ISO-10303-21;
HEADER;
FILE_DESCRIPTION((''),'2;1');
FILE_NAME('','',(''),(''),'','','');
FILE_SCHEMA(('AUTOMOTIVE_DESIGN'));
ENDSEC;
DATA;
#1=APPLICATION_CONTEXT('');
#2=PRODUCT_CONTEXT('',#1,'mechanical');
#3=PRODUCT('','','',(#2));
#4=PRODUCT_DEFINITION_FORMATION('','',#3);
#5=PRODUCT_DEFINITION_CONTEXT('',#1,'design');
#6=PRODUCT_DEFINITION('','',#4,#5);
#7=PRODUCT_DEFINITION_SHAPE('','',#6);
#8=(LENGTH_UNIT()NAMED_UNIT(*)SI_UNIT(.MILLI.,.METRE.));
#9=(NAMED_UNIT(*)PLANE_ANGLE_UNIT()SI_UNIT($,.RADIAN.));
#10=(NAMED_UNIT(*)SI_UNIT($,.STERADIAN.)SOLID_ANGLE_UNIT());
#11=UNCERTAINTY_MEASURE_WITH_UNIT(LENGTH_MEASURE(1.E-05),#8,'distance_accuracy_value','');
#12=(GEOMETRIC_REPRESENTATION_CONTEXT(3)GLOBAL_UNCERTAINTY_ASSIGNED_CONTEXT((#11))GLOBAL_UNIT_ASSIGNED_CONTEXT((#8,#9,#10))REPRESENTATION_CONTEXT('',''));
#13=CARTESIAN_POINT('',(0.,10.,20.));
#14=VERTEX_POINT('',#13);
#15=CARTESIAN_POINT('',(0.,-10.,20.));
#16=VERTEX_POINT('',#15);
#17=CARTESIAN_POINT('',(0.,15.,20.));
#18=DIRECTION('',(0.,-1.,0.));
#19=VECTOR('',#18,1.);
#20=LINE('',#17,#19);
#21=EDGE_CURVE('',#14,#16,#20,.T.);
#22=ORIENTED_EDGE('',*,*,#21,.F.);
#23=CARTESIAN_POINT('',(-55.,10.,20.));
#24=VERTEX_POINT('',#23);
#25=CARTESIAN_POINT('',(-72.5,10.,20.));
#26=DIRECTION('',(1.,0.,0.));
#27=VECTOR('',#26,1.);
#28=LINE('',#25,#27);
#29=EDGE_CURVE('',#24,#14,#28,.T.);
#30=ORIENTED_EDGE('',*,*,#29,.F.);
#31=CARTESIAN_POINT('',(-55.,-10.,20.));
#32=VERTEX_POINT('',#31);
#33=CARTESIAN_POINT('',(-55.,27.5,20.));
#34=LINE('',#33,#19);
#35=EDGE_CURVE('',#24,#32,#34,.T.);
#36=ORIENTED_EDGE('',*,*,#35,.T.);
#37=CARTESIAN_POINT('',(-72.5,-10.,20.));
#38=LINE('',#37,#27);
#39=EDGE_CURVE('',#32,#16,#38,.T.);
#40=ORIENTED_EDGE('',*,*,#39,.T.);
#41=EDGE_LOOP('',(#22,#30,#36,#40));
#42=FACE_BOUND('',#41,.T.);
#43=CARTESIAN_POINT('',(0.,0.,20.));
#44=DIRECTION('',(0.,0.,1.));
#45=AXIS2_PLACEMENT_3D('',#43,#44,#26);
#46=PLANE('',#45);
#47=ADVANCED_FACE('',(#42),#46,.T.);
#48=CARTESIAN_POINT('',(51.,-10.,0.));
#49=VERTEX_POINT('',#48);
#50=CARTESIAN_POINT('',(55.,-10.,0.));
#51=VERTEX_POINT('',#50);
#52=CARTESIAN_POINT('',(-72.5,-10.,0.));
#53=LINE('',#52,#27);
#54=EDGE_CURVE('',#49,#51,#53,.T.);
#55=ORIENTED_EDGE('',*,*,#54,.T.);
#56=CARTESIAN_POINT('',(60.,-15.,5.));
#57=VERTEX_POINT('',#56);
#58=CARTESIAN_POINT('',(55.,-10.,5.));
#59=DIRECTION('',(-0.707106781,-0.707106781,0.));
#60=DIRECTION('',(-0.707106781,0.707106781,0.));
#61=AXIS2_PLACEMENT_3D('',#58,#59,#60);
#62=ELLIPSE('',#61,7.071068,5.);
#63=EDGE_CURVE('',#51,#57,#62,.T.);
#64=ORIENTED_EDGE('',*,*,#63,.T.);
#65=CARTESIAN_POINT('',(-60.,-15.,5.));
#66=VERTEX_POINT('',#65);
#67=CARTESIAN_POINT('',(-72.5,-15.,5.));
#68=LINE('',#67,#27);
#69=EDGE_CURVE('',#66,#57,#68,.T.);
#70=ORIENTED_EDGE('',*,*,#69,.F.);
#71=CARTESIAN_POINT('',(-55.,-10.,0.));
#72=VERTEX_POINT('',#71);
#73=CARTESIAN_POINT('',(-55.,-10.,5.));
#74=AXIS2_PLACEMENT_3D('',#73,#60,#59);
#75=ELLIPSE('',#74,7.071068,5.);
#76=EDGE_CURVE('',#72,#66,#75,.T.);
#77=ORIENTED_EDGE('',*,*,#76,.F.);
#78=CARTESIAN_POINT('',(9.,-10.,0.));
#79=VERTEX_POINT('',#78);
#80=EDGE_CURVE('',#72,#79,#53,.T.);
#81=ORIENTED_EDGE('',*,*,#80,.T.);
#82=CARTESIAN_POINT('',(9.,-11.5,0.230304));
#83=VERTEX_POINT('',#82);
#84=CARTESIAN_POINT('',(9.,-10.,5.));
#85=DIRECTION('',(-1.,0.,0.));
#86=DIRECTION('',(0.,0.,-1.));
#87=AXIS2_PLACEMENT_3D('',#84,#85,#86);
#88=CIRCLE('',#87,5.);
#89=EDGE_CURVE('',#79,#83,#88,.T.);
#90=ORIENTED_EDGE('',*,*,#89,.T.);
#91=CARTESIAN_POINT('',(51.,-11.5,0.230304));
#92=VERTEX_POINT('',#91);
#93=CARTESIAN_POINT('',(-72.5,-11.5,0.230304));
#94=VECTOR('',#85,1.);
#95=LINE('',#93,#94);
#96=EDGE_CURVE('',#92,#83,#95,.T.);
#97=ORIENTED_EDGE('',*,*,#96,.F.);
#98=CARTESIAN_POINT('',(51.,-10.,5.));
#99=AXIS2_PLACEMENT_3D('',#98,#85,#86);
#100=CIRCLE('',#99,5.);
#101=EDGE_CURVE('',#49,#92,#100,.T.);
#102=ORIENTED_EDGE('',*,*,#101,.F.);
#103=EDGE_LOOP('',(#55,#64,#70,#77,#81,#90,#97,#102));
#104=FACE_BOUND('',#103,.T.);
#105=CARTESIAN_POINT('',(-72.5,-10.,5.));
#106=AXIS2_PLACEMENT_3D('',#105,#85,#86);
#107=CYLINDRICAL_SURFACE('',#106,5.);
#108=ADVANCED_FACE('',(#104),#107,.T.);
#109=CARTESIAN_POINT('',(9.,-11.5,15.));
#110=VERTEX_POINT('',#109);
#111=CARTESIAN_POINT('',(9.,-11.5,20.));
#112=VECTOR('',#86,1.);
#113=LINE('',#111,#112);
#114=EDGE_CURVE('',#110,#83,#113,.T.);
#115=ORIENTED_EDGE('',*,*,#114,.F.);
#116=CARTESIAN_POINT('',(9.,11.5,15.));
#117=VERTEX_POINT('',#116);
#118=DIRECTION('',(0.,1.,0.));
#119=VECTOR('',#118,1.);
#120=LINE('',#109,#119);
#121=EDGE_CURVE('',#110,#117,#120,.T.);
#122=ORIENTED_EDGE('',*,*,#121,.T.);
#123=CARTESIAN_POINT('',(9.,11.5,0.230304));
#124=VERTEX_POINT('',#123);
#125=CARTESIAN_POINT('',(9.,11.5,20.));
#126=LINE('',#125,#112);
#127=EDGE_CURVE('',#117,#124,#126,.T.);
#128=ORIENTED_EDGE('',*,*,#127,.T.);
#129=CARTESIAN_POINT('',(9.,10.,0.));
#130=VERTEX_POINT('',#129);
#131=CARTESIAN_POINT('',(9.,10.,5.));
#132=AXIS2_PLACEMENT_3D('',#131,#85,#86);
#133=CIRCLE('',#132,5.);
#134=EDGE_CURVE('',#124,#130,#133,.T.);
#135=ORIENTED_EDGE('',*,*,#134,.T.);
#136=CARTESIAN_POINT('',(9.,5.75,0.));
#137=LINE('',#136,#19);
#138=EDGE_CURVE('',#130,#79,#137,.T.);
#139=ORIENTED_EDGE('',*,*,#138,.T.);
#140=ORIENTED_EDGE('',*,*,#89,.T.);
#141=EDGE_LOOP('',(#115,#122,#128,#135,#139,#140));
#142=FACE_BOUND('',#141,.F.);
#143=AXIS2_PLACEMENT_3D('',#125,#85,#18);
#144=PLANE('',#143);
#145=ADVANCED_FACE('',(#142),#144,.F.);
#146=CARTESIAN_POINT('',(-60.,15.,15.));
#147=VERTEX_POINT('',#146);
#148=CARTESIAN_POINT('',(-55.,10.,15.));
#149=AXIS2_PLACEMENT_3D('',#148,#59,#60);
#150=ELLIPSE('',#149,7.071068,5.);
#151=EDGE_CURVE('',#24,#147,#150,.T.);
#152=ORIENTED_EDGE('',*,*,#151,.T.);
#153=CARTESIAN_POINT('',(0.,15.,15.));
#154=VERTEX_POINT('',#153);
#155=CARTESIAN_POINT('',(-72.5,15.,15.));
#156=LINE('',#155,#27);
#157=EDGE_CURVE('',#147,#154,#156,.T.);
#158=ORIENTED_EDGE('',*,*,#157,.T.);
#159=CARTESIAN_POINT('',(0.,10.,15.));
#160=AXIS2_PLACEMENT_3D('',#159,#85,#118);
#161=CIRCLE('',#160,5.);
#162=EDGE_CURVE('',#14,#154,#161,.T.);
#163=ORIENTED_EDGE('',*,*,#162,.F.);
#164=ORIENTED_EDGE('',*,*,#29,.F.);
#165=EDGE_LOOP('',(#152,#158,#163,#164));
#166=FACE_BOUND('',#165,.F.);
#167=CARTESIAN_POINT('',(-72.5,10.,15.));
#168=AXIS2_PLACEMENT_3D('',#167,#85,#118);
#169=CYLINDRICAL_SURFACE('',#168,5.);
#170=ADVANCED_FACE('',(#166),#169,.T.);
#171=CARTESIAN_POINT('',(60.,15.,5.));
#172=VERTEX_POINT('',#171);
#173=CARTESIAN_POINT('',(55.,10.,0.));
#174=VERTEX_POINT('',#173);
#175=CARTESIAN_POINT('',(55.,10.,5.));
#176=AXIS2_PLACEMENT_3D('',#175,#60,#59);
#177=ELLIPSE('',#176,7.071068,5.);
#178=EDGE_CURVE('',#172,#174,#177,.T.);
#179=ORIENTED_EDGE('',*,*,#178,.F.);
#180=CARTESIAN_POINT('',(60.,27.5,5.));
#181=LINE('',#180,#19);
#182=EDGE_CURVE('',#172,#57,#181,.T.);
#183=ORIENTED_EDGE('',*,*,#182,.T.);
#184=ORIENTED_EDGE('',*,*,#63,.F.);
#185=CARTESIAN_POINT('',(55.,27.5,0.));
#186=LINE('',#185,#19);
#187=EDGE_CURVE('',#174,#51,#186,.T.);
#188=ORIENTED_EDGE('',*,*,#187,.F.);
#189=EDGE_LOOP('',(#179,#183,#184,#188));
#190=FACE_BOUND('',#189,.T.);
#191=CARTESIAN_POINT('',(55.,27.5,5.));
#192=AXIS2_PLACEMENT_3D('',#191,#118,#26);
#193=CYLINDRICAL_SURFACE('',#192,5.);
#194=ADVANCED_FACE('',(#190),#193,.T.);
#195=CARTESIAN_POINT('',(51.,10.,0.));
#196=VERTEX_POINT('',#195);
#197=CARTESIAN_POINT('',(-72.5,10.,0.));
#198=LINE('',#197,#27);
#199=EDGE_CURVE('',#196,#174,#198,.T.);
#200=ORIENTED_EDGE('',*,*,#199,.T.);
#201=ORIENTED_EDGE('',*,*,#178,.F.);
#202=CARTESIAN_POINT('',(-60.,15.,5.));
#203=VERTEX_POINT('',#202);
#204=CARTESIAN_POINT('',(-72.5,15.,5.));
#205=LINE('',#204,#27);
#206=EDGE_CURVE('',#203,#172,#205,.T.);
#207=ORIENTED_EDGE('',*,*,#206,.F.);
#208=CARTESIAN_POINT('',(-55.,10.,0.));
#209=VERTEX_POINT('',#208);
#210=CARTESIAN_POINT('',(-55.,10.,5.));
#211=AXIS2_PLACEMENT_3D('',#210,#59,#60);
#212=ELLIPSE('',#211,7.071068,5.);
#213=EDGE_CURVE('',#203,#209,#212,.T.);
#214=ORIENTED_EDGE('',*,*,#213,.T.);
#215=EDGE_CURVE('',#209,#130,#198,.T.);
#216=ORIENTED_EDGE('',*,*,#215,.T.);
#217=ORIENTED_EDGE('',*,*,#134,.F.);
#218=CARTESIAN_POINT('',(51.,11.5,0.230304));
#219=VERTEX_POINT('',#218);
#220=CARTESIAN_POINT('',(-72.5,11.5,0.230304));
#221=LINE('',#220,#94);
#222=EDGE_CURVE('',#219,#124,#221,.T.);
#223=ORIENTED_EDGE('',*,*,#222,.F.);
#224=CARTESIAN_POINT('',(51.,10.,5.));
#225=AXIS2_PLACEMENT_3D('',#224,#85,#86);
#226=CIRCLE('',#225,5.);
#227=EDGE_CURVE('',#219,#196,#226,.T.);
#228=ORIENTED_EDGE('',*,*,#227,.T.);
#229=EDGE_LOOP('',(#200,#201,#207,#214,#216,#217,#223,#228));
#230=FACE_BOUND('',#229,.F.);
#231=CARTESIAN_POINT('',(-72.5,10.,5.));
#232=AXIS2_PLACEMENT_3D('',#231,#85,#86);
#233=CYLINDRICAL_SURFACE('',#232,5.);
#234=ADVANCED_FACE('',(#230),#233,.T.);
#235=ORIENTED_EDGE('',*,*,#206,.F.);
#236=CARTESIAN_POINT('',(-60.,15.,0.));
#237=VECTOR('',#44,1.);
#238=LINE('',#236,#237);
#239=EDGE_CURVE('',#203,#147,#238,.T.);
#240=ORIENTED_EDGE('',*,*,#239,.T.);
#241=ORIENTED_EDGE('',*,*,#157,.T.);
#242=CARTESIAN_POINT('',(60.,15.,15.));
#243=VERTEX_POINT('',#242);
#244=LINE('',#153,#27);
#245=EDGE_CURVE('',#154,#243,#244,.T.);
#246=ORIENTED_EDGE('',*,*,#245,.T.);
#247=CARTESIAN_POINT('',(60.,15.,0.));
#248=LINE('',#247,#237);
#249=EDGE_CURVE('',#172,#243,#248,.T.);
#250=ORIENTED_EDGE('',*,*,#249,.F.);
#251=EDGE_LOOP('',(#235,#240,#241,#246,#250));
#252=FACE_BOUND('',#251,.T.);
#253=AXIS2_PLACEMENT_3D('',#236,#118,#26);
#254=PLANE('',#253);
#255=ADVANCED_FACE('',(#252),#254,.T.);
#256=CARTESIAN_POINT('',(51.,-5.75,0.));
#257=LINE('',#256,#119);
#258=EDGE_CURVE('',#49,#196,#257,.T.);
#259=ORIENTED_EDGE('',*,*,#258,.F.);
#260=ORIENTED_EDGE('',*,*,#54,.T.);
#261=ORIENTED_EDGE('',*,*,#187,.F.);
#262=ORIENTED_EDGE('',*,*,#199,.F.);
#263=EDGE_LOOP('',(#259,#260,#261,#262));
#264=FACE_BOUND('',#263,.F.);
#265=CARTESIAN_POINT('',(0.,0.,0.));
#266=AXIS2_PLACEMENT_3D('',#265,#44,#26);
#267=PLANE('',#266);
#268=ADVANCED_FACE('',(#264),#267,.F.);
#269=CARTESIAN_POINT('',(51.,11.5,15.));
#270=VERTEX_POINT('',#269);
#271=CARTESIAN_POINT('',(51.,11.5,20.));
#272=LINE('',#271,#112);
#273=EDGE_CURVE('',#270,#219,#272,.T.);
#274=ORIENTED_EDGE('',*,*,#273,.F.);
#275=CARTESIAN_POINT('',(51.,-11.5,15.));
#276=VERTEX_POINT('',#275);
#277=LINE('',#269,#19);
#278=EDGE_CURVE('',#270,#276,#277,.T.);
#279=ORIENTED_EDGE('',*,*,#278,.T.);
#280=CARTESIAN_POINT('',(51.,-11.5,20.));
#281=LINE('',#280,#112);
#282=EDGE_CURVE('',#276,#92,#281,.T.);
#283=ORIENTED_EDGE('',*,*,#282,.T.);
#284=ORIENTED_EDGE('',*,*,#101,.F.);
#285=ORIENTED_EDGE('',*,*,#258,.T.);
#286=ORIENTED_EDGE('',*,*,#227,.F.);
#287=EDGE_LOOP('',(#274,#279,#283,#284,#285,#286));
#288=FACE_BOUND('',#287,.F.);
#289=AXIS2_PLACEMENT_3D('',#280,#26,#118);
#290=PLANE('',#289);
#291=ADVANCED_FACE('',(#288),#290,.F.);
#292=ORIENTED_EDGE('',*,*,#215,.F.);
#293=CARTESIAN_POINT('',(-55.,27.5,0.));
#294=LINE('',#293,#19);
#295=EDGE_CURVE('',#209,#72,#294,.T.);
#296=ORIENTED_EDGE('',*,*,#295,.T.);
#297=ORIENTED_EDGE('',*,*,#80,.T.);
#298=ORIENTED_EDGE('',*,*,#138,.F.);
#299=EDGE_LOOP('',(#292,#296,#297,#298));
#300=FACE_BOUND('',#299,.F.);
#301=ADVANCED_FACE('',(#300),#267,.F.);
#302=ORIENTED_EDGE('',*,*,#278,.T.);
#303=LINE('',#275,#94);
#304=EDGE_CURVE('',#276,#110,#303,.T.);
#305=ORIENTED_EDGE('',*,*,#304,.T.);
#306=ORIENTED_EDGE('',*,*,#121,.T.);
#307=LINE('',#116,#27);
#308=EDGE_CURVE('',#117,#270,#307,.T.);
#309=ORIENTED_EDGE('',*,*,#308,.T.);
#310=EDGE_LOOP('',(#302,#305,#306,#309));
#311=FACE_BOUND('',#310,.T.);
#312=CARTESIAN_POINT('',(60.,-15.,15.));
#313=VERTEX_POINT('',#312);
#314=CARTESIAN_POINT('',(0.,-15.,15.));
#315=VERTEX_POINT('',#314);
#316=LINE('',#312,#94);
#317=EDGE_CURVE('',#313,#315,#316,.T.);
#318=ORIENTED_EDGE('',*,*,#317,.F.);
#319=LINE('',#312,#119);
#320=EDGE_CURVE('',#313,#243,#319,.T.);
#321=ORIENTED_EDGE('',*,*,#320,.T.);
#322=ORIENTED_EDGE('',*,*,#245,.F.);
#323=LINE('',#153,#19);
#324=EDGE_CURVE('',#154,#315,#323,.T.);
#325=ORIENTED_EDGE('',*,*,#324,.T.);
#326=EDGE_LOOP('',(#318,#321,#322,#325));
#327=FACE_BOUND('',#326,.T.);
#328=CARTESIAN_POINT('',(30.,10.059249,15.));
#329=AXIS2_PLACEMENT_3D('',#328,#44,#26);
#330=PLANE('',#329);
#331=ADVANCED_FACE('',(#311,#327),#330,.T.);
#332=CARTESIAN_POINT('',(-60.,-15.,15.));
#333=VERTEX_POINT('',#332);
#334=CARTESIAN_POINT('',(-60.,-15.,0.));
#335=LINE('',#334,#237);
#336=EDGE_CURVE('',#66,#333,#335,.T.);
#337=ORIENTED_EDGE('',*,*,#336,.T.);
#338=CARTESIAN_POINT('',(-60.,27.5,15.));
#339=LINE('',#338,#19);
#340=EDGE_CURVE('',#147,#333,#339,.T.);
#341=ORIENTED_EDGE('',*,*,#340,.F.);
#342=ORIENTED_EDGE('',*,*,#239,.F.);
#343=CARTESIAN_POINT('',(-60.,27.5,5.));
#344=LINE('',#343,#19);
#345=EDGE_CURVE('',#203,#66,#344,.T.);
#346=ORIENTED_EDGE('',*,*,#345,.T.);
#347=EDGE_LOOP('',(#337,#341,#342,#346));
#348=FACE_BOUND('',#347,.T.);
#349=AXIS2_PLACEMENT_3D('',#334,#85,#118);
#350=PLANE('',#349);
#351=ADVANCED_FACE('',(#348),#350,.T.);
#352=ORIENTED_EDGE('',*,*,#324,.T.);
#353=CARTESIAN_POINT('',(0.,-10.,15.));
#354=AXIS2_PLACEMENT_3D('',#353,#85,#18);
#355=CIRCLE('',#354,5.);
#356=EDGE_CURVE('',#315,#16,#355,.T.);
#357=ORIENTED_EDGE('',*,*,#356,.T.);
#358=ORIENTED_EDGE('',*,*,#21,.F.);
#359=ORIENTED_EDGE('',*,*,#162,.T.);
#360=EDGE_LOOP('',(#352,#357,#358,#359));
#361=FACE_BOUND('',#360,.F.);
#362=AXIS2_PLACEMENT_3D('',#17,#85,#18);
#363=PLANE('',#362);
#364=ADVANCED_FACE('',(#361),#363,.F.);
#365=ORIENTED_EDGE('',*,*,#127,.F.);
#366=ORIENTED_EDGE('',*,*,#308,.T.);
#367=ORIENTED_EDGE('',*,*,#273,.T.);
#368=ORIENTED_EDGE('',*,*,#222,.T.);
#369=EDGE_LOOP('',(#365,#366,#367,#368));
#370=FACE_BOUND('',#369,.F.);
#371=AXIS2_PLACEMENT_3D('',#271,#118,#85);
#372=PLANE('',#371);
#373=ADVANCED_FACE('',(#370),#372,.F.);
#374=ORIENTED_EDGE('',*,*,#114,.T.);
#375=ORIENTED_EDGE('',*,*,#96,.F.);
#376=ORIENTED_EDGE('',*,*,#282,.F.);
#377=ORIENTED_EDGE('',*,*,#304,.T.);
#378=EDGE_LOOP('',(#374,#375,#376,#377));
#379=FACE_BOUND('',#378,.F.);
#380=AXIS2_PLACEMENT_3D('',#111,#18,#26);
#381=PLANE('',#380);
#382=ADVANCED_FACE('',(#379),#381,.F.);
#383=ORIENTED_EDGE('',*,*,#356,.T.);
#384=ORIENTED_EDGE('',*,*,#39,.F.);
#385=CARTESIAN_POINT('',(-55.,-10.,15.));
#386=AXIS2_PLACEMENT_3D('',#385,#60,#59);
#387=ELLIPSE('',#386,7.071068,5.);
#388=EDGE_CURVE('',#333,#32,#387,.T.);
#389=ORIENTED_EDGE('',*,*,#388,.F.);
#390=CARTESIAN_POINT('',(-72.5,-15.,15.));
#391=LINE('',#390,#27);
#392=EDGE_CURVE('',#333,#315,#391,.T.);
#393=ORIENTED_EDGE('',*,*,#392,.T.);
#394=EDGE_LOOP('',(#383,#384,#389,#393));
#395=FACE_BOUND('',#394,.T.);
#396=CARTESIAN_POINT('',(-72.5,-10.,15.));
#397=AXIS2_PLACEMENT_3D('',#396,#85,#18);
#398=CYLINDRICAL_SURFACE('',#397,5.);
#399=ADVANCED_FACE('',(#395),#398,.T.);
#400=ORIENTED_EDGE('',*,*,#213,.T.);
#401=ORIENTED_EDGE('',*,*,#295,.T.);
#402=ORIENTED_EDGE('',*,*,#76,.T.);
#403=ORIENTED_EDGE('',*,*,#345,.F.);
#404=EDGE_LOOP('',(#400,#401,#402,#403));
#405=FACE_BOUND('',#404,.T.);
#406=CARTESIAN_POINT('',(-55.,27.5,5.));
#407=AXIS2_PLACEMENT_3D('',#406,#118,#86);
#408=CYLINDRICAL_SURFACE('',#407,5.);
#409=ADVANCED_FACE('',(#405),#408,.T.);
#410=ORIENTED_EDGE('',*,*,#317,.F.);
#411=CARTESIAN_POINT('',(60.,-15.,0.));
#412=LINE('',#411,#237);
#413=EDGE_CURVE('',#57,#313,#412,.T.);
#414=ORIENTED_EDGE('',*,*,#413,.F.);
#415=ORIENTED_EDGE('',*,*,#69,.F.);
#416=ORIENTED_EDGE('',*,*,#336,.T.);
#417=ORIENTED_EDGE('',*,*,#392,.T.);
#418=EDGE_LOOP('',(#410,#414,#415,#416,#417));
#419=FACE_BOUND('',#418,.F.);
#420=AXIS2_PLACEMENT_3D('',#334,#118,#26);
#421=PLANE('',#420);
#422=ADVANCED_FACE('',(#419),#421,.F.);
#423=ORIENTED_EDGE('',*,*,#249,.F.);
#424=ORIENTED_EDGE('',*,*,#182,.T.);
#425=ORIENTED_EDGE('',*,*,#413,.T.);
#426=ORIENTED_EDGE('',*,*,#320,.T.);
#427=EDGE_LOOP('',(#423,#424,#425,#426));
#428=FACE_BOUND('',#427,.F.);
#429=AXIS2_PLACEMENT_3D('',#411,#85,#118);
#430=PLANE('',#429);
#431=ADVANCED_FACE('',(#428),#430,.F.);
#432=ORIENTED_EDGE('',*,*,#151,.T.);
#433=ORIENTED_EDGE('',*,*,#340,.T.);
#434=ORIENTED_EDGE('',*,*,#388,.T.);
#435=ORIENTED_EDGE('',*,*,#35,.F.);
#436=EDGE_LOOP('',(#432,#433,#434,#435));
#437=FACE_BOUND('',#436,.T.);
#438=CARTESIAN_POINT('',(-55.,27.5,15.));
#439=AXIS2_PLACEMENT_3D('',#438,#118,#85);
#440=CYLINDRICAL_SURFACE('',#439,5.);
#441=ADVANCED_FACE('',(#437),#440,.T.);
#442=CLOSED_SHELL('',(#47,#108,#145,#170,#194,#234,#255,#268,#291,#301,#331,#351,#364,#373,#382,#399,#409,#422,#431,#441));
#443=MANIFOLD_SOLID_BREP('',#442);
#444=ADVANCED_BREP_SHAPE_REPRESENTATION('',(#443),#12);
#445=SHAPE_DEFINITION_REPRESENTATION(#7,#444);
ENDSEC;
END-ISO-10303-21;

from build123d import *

# Parameters (mm, degrees)
F0_W        = 120
F0_H        = 30
F1_DEPTH    = 20
F3_DEPTH    = 25
F4_DEPTH    = 5
F5_T1_DEPTH = 85
F5_T3_DEPTH = 145
F5_T5_DEPTH = 55


# Not quite as in the source:
# - a fillet or chamfer that OpenCascade refuses, or shapes differently, is made with other operations: its cross-section is extruded or revolved along the edge and cut away or added


with BuildPart() as f1:
    # F0 (on Top) → F1 (new body)
    with BuildSketch(Plane.XY):
        Rectangle(F0_W, F0_H)
    extrude(amount=F1_DEPTH)

    # F2 (on face) → F3 (cut)
    with BuildSketch(Plane.XY.offset(20)):
        Polygon((9, 11.5), (9, 0), (30, 0), (51, 0), (51, 11.5), align=None)
        Polygon((30, 0), (9, 0), (9, -11.5), (51, -11.5), (51, 0), align=None)
    extrude(amount=-F3_DEPTH, mode=Mode.SUBTRACT)

    # F2 (on face) → F4 (cut)
    with BuildSketch(Plane.XY.offset(20)):
        Polygon((0, 15), (0, 0), (9, 0), (9, 11.5), (51, 11.5), (51, 0), (60, 0), (60, 15), align=None)
        Polygon((9, 0), (0, 0), (0, -15), (60, -15), (60, 0), (51, 0), (51, -11.5), (9, -11.5), align=None)
    extrude(amount=-F4_DEPTH, mode=Mode.SUBTRACT)

    # F5: fillet of radius 5 on 7 edges, made by hand

    # F5_s2 → F5_t1 (cut)
    with BuildSketch(Plane.YZ.offset(-72.5)):
        with BuildLine():
            ThreePointArc((-15, 15), (-13.5355339059, 18.5355339059), (-10, 20))
            Line((-10, 20), (-15, 20))
            Line((-15, 20), (-15, 15))
        make_face()
        with BuildLine():
            ThreePointArc((15, 15), (13.5355339059, 18.5355339059), (10, 20))
            Line((10, 20), (15, 20))
            Line((15, 20), (15, 15))
        make_face()
    extrude(amount=F5_T1_DEPTH, mode=Mode.SUBTRACT)

    # F5_s4 → F5_t3 (cut)
    with BuildSketch(Plane.YZ.offset(-72.5)):
        with BuildLine():
            ThreePointArc((-10, 0), (-13.5355339059, 1.4644660941), (-15, 5))
            Line((-15, 5), (-15, 0))
            Line((-15, 0), (-10, 0))
        make_face()
        with BuildLine():
            ThreePointArc((10, 0), (13.5355339059, 1.4644660941), (15, 5))
            Line((15, 5), (15, 0))
            Line((15, 0), (10, 0))
        make_face()
    extrude(amount=F5_T3_DEPTH, mode=Mode.SUBTRACT)

    # F5_s6 → F5_t5 (cut)
    with BuildSketch(Plane.XZ.offset(-27.5)):
        with BuildLine():
            ThreePointArc((60, 5), (58.5355339059, 1.4644660941), (55, 0))
            Line((55, 0), (60, 0))
            Line((60, 0), (60, 5))
        make_face()
        with BuildLine():
            ThreePointArc((-55, 0), (-58.5355339059, 1.4644660941), (-60, 5))
            Line((-60, 5), (-60, 0))
            Line((-60, 0), (-55, 0))
        make_face()
        with BuildLine():
            ThreePointArc((-60, 15), (-58.5355339059, 18.5355339059), (-55, 20))
            Line((-55, 20), (-60, 20))
            Line((-60, 20), (-60, 15))
        make_face()
    extrude(amount=F5_T5_DEPTH, mode=Mode.SUBTRACT)


solid = f1.part
